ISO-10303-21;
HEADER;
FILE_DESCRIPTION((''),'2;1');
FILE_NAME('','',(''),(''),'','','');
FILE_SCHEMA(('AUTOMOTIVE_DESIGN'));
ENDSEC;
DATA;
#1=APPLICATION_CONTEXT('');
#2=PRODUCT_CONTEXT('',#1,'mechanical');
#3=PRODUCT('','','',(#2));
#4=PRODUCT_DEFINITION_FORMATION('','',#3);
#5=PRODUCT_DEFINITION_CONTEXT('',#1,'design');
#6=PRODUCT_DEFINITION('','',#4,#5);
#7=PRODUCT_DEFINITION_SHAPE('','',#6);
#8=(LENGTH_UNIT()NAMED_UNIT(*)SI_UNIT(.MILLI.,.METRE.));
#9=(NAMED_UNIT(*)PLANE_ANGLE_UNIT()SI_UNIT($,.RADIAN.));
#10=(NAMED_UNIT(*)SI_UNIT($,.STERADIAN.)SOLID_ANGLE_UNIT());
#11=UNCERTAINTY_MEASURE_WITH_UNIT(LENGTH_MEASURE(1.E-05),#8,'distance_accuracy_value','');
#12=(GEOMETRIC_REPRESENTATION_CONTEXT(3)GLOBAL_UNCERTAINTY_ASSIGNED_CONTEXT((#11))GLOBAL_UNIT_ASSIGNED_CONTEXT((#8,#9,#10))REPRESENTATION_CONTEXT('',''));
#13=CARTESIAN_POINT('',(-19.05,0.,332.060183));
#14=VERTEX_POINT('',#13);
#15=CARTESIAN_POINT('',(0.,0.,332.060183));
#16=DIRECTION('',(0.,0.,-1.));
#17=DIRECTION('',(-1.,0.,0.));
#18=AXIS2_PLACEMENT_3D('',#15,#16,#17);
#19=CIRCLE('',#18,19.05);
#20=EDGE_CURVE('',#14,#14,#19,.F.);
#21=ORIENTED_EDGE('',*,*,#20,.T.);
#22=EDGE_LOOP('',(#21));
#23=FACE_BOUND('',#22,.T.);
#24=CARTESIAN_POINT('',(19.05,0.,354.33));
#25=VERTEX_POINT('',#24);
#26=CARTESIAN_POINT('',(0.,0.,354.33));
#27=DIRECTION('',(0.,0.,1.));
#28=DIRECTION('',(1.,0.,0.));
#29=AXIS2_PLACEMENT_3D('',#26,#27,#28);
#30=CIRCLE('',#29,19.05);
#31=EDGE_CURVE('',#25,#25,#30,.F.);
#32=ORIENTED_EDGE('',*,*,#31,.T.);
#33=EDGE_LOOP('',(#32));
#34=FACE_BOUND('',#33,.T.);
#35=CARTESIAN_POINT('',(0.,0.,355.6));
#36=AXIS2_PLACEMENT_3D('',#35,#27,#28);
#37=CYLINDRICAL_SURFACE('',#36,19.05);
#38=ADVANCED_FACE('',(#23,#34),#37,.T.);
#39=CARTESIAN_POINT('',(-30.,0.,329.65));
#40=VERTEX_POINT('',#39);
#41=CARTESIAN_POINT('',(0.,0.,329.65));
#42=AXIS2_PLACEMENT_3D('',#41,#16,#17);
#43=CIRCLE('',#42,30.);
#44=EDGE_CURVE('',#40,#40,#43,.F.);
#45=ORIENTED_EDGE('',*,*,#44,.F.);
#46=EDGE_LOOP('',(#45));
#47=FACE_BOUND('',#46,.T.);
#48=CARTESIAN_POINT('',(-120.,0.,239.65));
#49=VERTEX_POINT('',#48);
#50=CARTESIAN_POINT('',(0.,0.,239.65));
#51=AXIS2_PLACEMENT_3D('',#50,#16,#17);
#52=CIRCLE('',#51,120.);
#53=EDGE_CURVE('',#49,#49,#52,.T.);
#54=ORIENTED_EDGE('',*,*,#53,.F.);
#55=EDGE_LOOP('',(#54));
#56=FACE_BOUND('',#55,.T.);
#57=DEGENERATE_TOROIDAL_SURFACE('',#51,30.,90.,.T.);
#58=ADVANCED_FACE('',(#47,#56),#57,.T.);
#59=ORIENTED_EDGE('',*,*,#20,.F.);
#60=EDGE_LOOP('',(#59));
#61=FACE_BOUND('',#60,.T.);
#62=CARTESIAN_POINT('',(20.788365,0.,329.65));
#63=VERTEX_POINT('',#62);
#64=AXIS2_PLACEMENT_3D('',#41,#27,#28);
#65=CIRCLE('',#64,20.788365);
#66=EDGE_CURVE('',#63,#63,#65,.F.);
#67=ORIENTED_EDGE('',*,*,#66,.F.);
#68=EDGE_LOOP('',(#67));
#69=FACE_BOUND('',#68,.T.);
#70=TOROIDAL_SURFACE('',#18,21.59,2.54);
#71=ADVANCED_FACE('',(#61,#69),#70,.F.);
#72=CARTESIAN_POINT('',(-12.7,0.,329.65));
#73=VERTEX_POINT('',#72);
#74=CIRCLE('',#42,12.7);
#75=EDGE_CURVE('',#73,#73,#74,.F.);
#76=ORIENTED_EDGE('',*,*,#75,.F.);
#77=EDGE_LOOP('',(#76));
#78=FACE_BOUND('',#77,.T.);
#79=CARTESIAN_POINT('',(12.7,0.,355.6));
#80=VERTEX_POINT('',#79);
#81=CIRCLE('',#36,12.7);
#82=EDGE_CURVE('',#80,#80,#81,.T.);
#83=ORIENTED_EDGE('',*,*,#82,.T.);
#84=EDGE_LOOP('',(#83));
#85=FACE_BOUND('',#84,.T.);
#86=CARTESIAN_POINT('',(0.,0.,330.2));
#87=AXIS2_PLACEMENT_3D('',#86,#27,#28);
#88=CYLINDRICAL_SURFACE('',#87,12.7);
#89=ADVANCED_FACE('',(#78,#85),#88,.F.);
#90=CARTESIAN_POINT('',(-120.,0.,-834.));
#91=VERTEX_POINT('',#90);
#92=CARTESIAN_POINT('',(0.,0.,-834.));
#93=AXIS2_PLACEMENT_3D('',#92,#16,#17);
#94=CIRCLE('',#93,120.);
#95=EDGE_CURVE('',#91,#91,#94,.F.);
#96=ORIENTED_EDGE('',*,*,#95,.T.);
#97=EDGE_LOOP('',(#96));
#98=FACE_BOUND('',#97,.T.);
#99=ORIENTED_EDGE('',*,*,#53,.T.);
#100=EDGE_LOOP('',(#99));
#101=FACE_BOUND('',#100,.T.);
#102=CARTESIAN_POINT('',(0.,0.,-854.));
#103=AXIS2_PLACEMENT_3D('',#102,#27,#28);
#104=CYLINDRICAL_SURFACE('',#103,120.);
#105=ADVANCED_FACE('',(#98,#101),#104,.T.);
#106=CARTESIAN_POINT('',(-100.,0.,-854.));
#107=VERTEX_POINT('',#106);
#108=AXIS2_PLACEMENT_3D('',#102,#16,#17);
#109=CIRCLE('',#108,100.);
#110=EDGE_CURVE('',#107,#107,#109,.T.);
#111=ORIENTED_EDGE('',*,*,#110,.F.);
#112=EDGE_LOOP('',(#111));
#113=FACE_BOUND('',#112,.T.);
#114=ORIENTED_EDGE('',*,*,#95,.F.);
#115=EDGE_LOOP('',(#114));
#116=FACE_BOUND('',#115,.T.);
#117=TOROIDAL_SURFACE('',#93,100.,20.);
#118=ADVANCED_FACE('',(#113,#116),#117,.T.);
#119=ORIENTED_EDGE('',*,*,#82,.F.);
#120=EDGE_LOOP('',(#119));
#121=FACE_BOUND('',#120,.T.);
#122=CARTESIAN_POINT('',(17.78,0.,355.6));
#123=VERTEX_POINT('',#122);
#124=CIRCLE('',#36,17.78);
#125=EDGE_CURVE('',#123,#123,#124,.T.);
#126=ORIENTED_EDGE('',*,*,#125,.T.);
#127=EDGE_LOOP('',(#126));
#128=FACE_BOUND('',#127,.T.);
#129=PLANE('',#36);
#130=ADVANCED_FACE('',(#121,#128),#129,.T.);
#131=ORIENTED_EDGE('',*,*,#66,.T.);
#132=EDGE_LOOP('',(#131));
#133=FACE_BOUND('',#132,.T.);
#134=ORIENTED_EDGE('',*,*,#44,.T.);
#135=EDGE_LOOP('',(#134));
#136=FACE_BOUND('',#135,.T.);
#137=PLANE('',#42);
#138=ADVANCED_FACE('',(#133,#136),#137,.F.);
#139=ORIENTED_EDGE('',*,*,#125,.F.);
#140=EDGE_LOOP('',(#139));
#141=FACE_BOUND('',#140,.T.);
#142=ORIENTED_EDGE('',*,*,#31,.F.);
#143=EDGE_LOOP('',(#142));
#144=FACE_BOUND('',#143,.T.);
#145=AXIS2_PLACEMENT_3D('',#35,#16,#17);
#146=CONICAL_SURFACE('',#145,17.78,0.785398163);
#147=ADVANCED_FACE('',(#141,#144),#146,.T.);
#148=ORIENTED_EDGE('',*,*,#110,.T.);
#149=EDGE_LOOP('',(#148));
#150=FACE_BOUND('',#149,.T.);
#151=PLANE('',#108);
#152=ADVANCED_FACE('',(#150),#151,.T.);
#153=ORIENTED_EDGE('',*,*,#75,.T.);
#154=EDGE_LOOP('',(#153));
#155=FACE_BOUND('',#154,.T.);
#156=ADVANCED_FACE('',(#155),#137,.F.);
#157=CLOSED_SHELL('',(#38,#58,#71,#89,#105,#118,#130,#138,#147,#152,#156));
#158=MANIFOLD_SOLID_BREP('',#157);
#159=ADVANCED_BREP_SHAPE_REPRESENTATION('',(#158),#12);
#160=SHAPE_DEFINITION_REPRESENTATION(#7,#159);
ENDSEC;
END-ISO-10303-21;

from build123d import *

# Parameters (mm, degrees)
BOSS_EXTRUDE1_DEPTH      = 355.6
BOSS_EXTRUDE1_DEPTH_BACK = 254
SKETCH1_R                = 66.04
FILLET1_R                = 12.7
SKETCH3_R                = 12.7
CUT_EXTRUDE1_DEPTH       = 25.4
CHAMFER1_SIZE            = 1.27
FILLET2_R                = 2.54
BOSS_EXTRUDE2_DEPTH      = 600
BOSS_EXTRUDE2_DEPTH_BACK = 583.65
SKETCH4_R                = 120
FILLET3_R                = 20
FILLET4_R                = 90


# Read off the part's stored shape, not the designer's step: Shell1
with BuildPart() as part:
    # Sketch1 → Boss-Extrude1 (new, two sides: drawn at the far end of the back side and taken through both)
    with BuildSketch(Plane.XY.offset(-BOSS_EXTRUDE1_DEPTH_BACK)):
        Circle(SKETCH1_R)
    extrude(amount=BOSS_EXTRUDE1_DEPTH + BOSS_EXTRUDE1_DEPTH_BACK)

    # Sketch2 → Cut-Revolve1 (revolve, cut)
    with BuildSketch(Plane(origin=(0, 0, 0), x_dir=(0, 0, -1), z_dir=(1, 0, 0)), mode=Mode.PRIVATE) as cut_revolve1_sk:
        with BuildLine():
            Line((-355.6, 19.05), (-330.2, 19.05))
            ThreePointArc((-330.2, 19.05), (-306.35774098, 53.006337357), (-266.967262435, 66.04))
            Line((-266.967262435, 66.04), (-355.6, 66.04))
            Line((-355.6, 66.04), (-355.6, 19.05))
        make_face()
    revolve(cut_revolve1_sk.sketch.rotate(Axis((0, 0, 355.6), (0, 0, -1)), 90), axis=Axis((0, 0, 355.6), (0, 0, -1)), mode=Mode.SUBTRACT)

    # Fillet1
    fillet1_edges = [part.edges().sort_by_distance(p)[0] for p in [
        (-66.04, 0, -254),
    ]]
    fillet(fillet1_edges, radius=FILLET1_R)

    # Sketch3 → Cut-Extrude1 (cut)
    with BuildSketch(Plane.XY.offset(355.6)):
        Circle(SKETCH3_R)
    extrude(amount=-CUT_EXTRUDE1_DEPTH, mode=Mode.SUBTRACT)

    # Shell1 outline → Shell1 (revolve, cut)
    with BuildSketch(Plane.XZ):
        with BuildLine():
            Line((0, -247.65), (53.34, -247.65))
            ThreePointArc((53.34, -247.65), (57.830128061, -245.790128061), (59.69, -241.3))
            Line((59.69, -241.3), (59.69, 266.967262375))
            ThreePointArc((59.69, 266.967262375), (46.480959005, 304.416114887), (12.699999942, 325.290551964))
            Line((12.699999942, 325.290551964), (12.7, 330.2))
            Line((12.7, 330.2), (0, 330.2))
            Line((0, 330.2), (0, -247.65))
        make_face()
    revolve(axis=Axis((0, 0, 0), (0, 0, 1)), mode=Mode.SUBTRACT)

    # Chamfer1
    chamfer1_edges = [part.edges().sort_by_distance(p)[0] for p in [
        (-19.05, 0, 355.6),
    ]]
    chamfer(chamfer1_edges, length=CHAMFER1_SIZE)

    # Fillet2
    fillet2_edges = [part.edges().sort_by_distance(p)[0] for p in [
        (-19.05, 0, 330.2),
    ]]
    fillet(fillet2_edges, radius=FILLET2_R)

    # Sketch4 → Boss-Extrude2 (add, two sides: drawn at the far end of the back side and taken through both)
    with BuildSketch(Plane(origin=(0, 0, -254), x_dir=(-1, 0, 0), z_dir=(0, 0, -1)).offset(-BOSS_EXTRUDE2_DEPTH_BACK)):
        Circle(SKETCH4_R)
    extrude(amount=BOSS_EXTRUDE2_DEPTH + BOSS_EXTRUDE2_DEPTH_BACK)

    # Fillet3
    fillet3_edges = [part.edges().sort_by_distance(p)[0] for p in [
        (120, 0, -854),
    ]]
    fillet(fillet3_edges, radius=FILLET3_R)

    # Fillet4
    fillet4_edges = [part.edges().sort_by_distance(p)[0] for p in [
        (120, 0, 329.65),
    ]]
    fillet(fillet4_edges, radius=FILLET4_R)


solid = part.part
